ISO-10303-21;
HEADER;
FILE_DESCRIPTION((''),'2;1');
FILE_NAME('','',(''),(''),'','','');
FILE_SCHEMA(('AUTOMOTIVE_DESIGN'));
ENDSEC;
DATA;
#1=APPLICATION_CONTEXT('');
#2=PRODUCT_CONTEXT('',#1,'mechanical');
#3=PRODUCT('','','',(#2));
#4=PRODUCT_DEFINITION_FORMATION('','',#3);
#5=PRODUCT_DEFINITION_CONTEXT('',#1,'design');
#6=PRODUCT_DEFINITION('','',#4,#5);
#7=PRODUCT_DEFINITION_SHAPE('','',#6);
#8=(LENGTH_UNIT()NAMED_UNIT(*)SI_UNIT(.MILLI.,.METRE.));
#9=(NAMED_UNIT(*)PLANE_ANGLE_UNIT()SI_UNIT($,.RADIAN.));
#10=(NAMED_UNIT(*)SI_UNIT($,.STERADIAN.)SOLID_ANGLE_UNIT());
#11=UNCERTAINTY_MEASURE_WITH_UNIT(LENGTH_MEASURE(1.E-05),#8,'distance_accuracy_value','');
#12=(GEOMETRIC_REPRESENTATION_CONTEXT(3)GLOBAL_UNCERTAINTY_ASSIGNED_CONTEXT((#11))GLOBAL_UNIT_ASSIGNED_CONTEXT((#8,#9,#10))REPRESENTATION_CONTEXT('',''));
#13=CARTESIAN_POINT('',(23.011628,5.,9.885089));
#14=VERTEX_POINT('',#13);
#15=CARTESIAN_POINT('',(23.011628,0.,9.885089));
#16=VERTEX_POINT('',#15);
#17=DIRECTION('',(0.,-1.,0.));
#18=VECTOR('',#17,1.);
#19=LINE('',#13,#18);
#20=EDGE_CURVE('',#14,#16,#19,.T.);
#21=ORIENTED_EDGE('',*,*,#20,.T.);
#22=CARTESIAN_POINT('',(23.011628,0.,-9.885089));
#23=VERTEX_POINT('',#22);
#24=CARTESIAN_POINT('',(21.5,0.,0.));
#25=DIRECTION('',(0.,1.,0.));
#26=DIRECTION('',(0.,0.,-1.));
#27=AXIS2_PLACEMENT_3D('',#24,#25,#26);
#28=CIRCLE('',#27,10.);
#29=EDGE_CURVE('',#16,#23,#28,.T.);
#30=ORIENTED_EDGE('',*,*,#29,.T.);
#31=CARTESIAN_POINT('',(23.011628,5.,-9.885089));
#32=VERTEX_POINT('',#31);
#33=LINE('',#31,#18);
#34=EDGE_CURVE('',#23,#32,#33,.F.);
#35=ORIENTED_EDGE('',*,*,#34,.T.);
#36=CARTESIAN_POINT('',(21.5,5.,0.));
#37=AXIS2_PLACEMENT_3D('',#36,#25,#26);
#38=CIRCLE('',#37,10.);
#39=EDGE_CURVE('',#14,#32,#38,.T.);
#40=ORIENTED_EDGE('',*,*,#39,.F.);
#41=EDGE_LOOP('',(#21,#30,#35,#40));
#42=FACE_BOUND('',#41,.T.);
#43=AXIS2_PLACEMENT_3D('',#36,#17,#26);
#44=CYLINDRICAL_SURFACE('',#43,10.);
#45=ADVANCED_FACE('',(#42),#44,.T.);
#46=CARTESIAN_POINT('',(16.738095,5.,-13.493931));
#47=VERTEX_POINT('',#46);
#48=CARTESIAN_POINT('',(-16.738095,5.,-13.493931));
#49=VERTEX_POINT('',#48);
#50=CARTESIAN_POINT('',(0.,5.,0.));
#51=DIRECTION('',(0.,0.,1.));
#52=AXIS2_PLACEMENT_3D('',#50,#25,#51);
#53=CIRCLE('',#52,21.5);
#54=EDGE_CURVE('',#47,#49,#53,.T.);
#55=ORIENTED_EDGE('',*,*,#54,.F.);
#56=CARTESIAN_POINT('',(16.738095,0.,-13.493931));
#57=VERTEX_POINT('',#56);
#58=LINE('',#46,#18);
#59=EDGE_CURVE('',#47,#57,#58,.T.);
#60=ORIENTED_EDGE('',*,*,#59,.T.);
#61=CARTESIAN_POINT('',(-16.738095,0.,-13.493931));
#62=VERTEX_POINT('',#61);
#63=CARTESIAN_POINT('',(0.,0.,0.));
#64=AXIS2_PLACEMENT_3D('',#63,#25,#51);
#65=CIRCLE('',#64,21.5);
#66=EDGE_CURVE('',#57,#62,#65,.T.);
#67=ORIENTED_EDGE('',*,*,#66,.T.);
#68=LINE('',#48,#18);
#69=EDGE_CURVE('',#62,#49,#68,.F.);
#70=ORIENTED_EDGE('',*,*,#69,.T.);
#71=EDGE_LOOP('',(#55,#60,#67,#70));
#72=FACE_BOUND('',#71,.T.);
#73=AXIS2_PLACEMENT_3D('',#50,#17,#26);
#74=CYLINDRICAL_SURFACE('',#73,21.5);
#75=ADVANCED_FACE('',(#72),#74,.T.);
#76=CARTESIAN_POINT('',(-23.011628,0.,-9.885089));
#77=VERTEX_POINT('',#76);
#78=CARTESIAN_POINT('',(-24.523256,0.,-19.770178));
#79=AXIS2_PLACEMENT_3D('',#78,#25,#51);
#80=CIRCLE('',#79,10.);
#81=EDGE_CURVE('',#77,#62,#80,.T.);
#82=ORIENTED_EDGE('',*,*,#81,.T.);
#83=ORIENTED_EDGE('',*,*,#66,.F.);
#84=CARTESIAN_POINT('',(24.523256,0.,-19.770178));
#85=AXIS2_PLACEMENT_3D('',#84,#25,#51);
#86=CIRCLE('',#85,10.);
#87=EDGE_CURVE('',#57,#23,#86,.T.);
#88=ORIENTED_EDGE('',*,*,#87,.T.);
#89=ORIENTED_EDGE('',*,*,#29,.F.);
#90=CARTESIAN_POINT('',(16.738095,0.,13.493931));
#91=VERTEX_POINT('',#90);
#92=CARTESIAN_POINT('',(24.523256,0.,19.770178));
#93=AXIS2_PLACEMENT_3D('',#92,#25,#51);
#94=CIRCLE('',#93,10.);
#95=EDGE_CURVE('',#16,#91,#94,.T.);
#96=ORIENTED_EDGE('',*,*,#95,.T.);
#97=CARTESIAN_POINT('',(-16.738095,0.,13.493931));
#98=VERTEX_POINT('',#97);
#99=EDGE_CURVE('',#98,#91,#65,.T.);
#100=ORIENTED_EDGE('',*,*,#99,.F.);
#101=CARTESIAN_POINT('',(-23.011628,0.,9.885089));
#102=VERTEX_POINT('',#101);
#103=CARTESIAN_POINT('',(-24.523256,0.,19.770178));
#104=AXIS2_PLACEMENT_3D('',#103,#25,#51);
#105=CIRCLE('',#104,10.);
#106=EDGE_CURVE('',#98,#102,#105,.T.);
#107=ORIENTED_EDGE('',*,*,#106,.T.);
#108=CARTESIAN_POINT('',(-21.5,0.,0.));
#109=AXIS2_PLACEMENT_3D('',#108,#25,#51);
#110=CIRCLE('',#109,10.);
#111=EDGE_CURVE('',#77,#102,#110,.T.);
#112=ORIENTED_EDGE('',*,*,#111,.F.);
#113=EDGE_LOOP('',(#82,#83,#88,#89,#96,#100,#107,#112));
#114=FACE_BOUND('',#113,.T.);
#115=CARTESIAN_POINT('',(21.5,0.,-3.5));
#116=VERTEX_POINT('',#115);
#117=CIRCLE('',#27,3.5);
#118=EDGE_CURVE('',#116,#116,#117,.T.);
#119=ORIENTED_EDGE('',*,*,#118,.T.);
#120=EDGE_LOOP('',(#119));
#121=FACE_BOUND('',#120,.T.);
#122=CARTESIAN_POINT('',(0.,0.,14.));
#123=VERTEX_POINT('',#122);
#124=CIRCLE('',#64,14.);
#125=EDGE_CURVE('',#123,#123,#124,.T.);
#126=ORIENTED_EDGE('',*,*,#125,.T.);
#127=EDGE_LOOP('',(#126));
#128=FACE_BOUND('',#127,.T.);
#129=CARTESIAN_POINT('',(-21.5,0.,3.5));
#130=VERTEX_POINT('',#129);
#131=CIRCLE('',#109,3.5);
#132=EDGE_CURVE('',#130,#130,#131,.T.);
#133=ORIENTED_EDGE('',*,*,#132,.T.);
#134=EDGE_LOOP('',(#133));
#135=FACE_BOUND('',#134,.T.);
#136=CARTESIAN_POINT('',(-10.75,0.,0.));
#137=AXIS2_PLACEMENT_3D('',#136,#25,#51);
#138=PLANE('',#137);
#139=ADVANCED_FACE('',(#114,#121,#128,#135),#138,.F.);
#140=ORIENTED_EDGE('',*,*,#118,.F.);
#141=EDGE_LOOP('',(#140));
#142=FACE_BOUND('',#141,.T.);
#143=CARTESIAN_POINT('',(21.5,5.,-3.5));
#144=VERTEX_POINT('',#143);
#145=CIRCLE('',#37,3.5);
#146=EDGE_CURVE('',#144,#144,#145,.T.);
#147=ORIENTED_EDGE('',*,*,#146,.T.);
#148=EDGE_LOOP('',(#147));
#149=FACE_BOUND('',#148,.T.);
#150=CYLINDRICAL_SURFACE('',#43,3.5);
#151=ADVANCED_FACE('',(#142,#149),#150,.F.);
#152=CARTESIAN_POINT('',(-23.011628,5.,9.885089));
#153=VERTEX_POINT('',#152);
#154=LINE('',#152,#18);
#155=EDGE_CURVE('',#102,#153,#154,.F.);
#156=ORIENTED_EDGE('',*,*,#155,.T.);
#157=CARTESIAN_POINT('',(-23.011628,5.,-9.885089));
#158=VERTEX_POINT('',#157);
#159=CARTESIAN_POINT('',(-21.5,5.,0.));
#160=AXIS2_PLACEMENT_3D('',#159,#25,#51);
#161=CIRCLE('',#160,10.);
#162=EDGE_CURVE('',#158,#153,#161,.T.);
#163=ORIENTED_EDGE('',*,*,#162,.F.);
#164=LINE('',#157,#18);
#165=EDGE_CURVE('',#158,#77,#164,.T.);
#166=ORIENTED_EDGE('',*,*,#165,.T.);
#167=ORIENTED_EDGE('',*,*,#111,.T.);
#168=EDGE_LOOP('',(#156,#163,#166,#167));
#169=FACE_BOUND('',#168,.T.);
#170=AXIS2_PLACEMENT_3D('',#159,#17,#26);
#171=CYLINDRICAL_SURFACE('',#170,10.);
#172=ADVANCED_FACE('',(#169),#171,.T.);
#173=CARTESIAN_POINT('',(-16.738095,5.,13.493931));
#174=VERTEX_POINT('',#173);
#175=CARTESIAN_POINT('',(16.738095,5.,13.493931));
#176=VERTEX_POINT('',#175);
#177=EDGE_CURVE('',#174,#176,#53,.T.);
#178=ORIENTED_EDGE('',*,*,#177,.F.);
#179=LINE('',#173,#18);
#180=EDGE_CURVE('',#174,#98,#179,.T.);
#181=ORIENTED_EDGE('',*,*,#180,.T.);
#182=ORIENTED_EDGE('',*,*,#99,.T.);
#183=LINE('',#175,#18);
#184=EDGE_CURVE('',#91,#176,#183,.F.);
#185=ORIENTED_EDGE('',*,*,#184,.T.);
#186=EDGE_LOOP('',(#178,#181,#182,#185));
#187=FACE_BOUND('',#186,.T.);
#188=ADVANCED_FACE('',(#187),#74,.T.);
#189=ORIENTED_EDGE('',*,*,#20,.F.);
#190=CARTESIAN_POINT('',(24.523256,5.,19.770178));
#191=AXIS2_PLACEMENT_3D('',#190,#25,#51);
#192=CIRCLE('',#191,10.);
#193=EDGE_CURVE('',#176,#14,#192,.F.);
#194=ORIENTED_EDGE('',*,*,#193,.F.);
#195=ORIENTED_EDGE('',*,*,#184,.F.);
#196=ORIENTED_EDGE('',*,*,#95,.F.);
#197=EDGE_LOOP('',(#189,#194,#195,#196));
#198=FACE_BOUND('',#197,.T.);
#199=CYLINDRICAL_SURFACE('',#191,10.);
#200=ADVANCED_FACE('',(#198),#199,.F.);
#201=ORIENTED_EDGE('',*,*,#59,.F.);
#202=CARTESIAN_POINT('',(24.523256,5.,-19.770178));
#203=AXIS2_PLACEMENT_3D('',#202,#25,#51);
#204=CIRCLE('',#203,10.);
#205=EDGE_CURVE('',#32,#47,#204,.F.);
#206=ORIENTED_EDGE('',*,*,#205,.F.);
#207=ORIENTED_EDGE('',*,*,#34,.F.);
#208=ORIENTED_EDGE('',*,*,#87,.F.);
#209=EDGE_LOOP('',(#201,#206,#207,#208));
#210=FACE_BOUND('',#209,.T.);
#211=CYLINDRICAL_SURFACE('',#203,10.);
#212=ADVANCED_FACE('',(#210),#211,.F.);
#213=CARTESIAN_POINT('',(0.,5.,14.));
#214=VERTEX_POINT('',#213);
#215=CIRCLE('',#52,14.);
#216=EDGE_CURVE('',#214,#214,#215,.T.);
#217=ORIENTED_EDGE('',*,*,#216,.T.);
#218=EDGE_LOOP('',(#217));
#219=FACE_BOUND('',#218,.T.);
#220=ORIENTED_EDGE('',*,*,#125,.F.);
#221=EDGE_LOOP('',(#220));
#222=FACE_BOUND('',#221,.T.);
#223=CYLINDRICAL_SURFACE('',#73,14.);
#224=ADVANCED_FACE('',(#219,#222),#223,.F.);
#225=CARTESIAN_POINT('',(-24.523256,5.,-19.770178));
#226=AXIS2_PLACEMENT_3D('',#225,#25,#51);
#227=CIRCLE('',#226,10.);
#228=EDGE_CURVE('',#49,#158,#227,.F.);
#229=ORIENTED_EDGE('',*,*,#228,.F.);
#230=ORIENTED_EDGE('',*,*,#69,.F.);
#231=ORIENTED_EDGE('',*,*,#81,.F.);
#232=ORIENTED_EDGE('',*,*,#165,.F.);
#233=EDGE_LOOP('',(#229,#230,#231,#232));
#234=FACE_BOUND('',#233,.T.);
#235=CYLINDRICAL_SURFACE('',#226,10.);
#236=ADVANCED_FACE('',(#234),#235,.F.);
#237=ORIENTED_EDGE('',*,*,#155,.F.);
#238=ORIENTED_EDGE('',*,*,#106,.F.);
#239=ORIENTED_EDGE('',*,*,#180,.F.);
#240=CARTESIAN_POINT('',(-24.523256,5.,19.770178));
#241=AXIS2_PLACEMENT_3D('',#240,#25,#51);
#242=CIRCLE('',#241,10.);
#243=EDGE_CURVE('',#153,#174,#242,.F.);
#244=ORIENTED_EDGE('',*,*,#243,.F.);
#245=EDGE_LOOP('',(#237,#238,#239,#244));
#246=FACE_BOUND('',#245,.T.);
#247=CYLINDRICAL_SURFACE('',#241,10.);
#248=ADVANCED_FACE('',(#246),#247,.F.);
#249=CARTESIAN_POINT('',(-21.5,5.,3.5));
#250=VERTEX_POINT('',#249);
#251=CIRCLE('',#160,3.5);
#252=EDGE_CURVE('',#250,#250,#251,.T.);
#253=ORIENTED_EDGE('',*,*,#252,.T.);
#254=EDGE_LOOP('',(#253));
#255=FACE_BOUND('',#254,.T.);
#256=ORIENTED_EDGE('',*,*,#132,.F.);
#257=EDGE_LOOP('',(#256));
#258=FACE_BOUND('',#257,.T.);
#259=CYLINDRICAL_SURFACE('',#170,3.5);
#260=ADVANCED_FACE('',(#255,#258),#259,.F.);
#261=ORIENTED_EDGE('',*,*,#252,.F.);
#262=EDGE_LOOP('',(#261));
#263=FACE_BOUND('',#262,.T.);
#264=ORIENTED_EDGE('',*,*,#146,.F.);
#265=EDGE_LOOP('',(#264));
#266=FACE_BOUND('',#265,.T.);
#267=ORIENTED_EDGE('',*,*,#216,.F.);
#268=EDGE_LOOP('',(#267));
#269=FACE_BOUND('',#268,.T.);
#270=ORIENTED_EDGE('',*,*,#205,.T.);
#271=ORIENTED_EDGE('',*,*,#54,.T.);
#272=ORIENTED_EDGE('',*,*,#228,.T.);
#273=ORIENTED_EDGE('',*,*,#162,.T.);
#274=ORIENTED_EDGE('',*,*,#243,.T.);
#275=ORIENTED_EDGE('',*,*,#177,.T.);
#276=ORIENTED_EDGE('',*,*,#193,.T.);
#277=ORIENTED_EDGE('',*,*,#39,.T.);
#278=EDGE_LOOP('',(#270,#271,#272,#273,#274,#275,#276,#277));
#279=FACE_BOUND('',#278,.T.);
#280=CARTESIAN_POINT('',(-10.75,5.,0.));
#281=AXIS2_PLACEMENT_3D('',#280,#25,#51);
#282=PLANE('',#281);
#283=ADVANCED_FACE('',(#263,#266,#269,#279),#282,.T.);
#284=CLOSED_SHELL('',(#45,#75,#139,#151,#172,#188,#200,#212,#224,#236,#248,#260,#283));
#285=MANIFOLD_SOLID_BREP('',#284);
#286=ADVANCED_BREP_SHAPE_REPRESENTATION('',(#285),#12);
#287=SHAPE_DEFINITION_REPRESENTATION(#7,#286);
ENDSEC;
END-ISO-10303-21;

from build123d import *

# Parameters (mm, degrees)
BOSS_EXTRUDE2_OUTLINE_R   = 3.5
BOSS_EXTRUDE2_OUTLINE_R_2 = 14
BOSS_EXTRUDE2_DEPTH       = 5
FILLET2_R                 = 10


# Read off the part's stored shape, not the designer's step: Boss-Extrude2
with BuildPart() as part:
    # Boss-Extrude2 outline → Boss-Extrude2 (new body)
    with BuildSketch(Plane(origin=(0, 0, 0), x_dir=(1, 0, 0), z_dir=(0, 1, 0))):
        with BuildLine():
            ThreePointArc((19.174418605, 9.725824961), (0, 21.5), (-19.174418605, 9.725824961))
            ThreePointArc((-19.174418605, 9.725824961), (-31.5, 0), (-19.174418605, -9.725824961))
            ThreePointArc((-19.174418605, -9.725824961), (0, -21.5), (19.174418605, -9.725824961))
            ThreePointArc((19.174418605, -9.725824961), (31.5, 0), (19.174418605, 9.725824961))
        make_face()
        with Locations((-21.5, 0)):
            Circle(BOSS_EXTRUDE2_OUTLINE_R, mode=Mode.SUBTRACT)
        Circle(BOSS_EXTRUDE2_OUTLINE_R_2, mode=Mode.SUBTRACT)
        with Locations((21.5, 0)):
            Circle(BOSS_EXTRUDE2_OUTLINE_R, mode=Mode.SUBTRACT)
    extrude(amount=BOSS_EXTRUDE2_DEPTH)

    # Fillet2
    fillet2_edges = [part.edges().sort_by_distance(p)[0] for p in [
        (19.174418605, 2.5, -9.725824961),
        (19.174418605, 2.5, 9.725824961),
        (-19.174418605, 2.5, 9.725824961),
        (-19.174418605, 2.5, -9.725824961),
    ]]
    fillet(fillet2_edges, radius=FILLET2_R)


solid = part.part
